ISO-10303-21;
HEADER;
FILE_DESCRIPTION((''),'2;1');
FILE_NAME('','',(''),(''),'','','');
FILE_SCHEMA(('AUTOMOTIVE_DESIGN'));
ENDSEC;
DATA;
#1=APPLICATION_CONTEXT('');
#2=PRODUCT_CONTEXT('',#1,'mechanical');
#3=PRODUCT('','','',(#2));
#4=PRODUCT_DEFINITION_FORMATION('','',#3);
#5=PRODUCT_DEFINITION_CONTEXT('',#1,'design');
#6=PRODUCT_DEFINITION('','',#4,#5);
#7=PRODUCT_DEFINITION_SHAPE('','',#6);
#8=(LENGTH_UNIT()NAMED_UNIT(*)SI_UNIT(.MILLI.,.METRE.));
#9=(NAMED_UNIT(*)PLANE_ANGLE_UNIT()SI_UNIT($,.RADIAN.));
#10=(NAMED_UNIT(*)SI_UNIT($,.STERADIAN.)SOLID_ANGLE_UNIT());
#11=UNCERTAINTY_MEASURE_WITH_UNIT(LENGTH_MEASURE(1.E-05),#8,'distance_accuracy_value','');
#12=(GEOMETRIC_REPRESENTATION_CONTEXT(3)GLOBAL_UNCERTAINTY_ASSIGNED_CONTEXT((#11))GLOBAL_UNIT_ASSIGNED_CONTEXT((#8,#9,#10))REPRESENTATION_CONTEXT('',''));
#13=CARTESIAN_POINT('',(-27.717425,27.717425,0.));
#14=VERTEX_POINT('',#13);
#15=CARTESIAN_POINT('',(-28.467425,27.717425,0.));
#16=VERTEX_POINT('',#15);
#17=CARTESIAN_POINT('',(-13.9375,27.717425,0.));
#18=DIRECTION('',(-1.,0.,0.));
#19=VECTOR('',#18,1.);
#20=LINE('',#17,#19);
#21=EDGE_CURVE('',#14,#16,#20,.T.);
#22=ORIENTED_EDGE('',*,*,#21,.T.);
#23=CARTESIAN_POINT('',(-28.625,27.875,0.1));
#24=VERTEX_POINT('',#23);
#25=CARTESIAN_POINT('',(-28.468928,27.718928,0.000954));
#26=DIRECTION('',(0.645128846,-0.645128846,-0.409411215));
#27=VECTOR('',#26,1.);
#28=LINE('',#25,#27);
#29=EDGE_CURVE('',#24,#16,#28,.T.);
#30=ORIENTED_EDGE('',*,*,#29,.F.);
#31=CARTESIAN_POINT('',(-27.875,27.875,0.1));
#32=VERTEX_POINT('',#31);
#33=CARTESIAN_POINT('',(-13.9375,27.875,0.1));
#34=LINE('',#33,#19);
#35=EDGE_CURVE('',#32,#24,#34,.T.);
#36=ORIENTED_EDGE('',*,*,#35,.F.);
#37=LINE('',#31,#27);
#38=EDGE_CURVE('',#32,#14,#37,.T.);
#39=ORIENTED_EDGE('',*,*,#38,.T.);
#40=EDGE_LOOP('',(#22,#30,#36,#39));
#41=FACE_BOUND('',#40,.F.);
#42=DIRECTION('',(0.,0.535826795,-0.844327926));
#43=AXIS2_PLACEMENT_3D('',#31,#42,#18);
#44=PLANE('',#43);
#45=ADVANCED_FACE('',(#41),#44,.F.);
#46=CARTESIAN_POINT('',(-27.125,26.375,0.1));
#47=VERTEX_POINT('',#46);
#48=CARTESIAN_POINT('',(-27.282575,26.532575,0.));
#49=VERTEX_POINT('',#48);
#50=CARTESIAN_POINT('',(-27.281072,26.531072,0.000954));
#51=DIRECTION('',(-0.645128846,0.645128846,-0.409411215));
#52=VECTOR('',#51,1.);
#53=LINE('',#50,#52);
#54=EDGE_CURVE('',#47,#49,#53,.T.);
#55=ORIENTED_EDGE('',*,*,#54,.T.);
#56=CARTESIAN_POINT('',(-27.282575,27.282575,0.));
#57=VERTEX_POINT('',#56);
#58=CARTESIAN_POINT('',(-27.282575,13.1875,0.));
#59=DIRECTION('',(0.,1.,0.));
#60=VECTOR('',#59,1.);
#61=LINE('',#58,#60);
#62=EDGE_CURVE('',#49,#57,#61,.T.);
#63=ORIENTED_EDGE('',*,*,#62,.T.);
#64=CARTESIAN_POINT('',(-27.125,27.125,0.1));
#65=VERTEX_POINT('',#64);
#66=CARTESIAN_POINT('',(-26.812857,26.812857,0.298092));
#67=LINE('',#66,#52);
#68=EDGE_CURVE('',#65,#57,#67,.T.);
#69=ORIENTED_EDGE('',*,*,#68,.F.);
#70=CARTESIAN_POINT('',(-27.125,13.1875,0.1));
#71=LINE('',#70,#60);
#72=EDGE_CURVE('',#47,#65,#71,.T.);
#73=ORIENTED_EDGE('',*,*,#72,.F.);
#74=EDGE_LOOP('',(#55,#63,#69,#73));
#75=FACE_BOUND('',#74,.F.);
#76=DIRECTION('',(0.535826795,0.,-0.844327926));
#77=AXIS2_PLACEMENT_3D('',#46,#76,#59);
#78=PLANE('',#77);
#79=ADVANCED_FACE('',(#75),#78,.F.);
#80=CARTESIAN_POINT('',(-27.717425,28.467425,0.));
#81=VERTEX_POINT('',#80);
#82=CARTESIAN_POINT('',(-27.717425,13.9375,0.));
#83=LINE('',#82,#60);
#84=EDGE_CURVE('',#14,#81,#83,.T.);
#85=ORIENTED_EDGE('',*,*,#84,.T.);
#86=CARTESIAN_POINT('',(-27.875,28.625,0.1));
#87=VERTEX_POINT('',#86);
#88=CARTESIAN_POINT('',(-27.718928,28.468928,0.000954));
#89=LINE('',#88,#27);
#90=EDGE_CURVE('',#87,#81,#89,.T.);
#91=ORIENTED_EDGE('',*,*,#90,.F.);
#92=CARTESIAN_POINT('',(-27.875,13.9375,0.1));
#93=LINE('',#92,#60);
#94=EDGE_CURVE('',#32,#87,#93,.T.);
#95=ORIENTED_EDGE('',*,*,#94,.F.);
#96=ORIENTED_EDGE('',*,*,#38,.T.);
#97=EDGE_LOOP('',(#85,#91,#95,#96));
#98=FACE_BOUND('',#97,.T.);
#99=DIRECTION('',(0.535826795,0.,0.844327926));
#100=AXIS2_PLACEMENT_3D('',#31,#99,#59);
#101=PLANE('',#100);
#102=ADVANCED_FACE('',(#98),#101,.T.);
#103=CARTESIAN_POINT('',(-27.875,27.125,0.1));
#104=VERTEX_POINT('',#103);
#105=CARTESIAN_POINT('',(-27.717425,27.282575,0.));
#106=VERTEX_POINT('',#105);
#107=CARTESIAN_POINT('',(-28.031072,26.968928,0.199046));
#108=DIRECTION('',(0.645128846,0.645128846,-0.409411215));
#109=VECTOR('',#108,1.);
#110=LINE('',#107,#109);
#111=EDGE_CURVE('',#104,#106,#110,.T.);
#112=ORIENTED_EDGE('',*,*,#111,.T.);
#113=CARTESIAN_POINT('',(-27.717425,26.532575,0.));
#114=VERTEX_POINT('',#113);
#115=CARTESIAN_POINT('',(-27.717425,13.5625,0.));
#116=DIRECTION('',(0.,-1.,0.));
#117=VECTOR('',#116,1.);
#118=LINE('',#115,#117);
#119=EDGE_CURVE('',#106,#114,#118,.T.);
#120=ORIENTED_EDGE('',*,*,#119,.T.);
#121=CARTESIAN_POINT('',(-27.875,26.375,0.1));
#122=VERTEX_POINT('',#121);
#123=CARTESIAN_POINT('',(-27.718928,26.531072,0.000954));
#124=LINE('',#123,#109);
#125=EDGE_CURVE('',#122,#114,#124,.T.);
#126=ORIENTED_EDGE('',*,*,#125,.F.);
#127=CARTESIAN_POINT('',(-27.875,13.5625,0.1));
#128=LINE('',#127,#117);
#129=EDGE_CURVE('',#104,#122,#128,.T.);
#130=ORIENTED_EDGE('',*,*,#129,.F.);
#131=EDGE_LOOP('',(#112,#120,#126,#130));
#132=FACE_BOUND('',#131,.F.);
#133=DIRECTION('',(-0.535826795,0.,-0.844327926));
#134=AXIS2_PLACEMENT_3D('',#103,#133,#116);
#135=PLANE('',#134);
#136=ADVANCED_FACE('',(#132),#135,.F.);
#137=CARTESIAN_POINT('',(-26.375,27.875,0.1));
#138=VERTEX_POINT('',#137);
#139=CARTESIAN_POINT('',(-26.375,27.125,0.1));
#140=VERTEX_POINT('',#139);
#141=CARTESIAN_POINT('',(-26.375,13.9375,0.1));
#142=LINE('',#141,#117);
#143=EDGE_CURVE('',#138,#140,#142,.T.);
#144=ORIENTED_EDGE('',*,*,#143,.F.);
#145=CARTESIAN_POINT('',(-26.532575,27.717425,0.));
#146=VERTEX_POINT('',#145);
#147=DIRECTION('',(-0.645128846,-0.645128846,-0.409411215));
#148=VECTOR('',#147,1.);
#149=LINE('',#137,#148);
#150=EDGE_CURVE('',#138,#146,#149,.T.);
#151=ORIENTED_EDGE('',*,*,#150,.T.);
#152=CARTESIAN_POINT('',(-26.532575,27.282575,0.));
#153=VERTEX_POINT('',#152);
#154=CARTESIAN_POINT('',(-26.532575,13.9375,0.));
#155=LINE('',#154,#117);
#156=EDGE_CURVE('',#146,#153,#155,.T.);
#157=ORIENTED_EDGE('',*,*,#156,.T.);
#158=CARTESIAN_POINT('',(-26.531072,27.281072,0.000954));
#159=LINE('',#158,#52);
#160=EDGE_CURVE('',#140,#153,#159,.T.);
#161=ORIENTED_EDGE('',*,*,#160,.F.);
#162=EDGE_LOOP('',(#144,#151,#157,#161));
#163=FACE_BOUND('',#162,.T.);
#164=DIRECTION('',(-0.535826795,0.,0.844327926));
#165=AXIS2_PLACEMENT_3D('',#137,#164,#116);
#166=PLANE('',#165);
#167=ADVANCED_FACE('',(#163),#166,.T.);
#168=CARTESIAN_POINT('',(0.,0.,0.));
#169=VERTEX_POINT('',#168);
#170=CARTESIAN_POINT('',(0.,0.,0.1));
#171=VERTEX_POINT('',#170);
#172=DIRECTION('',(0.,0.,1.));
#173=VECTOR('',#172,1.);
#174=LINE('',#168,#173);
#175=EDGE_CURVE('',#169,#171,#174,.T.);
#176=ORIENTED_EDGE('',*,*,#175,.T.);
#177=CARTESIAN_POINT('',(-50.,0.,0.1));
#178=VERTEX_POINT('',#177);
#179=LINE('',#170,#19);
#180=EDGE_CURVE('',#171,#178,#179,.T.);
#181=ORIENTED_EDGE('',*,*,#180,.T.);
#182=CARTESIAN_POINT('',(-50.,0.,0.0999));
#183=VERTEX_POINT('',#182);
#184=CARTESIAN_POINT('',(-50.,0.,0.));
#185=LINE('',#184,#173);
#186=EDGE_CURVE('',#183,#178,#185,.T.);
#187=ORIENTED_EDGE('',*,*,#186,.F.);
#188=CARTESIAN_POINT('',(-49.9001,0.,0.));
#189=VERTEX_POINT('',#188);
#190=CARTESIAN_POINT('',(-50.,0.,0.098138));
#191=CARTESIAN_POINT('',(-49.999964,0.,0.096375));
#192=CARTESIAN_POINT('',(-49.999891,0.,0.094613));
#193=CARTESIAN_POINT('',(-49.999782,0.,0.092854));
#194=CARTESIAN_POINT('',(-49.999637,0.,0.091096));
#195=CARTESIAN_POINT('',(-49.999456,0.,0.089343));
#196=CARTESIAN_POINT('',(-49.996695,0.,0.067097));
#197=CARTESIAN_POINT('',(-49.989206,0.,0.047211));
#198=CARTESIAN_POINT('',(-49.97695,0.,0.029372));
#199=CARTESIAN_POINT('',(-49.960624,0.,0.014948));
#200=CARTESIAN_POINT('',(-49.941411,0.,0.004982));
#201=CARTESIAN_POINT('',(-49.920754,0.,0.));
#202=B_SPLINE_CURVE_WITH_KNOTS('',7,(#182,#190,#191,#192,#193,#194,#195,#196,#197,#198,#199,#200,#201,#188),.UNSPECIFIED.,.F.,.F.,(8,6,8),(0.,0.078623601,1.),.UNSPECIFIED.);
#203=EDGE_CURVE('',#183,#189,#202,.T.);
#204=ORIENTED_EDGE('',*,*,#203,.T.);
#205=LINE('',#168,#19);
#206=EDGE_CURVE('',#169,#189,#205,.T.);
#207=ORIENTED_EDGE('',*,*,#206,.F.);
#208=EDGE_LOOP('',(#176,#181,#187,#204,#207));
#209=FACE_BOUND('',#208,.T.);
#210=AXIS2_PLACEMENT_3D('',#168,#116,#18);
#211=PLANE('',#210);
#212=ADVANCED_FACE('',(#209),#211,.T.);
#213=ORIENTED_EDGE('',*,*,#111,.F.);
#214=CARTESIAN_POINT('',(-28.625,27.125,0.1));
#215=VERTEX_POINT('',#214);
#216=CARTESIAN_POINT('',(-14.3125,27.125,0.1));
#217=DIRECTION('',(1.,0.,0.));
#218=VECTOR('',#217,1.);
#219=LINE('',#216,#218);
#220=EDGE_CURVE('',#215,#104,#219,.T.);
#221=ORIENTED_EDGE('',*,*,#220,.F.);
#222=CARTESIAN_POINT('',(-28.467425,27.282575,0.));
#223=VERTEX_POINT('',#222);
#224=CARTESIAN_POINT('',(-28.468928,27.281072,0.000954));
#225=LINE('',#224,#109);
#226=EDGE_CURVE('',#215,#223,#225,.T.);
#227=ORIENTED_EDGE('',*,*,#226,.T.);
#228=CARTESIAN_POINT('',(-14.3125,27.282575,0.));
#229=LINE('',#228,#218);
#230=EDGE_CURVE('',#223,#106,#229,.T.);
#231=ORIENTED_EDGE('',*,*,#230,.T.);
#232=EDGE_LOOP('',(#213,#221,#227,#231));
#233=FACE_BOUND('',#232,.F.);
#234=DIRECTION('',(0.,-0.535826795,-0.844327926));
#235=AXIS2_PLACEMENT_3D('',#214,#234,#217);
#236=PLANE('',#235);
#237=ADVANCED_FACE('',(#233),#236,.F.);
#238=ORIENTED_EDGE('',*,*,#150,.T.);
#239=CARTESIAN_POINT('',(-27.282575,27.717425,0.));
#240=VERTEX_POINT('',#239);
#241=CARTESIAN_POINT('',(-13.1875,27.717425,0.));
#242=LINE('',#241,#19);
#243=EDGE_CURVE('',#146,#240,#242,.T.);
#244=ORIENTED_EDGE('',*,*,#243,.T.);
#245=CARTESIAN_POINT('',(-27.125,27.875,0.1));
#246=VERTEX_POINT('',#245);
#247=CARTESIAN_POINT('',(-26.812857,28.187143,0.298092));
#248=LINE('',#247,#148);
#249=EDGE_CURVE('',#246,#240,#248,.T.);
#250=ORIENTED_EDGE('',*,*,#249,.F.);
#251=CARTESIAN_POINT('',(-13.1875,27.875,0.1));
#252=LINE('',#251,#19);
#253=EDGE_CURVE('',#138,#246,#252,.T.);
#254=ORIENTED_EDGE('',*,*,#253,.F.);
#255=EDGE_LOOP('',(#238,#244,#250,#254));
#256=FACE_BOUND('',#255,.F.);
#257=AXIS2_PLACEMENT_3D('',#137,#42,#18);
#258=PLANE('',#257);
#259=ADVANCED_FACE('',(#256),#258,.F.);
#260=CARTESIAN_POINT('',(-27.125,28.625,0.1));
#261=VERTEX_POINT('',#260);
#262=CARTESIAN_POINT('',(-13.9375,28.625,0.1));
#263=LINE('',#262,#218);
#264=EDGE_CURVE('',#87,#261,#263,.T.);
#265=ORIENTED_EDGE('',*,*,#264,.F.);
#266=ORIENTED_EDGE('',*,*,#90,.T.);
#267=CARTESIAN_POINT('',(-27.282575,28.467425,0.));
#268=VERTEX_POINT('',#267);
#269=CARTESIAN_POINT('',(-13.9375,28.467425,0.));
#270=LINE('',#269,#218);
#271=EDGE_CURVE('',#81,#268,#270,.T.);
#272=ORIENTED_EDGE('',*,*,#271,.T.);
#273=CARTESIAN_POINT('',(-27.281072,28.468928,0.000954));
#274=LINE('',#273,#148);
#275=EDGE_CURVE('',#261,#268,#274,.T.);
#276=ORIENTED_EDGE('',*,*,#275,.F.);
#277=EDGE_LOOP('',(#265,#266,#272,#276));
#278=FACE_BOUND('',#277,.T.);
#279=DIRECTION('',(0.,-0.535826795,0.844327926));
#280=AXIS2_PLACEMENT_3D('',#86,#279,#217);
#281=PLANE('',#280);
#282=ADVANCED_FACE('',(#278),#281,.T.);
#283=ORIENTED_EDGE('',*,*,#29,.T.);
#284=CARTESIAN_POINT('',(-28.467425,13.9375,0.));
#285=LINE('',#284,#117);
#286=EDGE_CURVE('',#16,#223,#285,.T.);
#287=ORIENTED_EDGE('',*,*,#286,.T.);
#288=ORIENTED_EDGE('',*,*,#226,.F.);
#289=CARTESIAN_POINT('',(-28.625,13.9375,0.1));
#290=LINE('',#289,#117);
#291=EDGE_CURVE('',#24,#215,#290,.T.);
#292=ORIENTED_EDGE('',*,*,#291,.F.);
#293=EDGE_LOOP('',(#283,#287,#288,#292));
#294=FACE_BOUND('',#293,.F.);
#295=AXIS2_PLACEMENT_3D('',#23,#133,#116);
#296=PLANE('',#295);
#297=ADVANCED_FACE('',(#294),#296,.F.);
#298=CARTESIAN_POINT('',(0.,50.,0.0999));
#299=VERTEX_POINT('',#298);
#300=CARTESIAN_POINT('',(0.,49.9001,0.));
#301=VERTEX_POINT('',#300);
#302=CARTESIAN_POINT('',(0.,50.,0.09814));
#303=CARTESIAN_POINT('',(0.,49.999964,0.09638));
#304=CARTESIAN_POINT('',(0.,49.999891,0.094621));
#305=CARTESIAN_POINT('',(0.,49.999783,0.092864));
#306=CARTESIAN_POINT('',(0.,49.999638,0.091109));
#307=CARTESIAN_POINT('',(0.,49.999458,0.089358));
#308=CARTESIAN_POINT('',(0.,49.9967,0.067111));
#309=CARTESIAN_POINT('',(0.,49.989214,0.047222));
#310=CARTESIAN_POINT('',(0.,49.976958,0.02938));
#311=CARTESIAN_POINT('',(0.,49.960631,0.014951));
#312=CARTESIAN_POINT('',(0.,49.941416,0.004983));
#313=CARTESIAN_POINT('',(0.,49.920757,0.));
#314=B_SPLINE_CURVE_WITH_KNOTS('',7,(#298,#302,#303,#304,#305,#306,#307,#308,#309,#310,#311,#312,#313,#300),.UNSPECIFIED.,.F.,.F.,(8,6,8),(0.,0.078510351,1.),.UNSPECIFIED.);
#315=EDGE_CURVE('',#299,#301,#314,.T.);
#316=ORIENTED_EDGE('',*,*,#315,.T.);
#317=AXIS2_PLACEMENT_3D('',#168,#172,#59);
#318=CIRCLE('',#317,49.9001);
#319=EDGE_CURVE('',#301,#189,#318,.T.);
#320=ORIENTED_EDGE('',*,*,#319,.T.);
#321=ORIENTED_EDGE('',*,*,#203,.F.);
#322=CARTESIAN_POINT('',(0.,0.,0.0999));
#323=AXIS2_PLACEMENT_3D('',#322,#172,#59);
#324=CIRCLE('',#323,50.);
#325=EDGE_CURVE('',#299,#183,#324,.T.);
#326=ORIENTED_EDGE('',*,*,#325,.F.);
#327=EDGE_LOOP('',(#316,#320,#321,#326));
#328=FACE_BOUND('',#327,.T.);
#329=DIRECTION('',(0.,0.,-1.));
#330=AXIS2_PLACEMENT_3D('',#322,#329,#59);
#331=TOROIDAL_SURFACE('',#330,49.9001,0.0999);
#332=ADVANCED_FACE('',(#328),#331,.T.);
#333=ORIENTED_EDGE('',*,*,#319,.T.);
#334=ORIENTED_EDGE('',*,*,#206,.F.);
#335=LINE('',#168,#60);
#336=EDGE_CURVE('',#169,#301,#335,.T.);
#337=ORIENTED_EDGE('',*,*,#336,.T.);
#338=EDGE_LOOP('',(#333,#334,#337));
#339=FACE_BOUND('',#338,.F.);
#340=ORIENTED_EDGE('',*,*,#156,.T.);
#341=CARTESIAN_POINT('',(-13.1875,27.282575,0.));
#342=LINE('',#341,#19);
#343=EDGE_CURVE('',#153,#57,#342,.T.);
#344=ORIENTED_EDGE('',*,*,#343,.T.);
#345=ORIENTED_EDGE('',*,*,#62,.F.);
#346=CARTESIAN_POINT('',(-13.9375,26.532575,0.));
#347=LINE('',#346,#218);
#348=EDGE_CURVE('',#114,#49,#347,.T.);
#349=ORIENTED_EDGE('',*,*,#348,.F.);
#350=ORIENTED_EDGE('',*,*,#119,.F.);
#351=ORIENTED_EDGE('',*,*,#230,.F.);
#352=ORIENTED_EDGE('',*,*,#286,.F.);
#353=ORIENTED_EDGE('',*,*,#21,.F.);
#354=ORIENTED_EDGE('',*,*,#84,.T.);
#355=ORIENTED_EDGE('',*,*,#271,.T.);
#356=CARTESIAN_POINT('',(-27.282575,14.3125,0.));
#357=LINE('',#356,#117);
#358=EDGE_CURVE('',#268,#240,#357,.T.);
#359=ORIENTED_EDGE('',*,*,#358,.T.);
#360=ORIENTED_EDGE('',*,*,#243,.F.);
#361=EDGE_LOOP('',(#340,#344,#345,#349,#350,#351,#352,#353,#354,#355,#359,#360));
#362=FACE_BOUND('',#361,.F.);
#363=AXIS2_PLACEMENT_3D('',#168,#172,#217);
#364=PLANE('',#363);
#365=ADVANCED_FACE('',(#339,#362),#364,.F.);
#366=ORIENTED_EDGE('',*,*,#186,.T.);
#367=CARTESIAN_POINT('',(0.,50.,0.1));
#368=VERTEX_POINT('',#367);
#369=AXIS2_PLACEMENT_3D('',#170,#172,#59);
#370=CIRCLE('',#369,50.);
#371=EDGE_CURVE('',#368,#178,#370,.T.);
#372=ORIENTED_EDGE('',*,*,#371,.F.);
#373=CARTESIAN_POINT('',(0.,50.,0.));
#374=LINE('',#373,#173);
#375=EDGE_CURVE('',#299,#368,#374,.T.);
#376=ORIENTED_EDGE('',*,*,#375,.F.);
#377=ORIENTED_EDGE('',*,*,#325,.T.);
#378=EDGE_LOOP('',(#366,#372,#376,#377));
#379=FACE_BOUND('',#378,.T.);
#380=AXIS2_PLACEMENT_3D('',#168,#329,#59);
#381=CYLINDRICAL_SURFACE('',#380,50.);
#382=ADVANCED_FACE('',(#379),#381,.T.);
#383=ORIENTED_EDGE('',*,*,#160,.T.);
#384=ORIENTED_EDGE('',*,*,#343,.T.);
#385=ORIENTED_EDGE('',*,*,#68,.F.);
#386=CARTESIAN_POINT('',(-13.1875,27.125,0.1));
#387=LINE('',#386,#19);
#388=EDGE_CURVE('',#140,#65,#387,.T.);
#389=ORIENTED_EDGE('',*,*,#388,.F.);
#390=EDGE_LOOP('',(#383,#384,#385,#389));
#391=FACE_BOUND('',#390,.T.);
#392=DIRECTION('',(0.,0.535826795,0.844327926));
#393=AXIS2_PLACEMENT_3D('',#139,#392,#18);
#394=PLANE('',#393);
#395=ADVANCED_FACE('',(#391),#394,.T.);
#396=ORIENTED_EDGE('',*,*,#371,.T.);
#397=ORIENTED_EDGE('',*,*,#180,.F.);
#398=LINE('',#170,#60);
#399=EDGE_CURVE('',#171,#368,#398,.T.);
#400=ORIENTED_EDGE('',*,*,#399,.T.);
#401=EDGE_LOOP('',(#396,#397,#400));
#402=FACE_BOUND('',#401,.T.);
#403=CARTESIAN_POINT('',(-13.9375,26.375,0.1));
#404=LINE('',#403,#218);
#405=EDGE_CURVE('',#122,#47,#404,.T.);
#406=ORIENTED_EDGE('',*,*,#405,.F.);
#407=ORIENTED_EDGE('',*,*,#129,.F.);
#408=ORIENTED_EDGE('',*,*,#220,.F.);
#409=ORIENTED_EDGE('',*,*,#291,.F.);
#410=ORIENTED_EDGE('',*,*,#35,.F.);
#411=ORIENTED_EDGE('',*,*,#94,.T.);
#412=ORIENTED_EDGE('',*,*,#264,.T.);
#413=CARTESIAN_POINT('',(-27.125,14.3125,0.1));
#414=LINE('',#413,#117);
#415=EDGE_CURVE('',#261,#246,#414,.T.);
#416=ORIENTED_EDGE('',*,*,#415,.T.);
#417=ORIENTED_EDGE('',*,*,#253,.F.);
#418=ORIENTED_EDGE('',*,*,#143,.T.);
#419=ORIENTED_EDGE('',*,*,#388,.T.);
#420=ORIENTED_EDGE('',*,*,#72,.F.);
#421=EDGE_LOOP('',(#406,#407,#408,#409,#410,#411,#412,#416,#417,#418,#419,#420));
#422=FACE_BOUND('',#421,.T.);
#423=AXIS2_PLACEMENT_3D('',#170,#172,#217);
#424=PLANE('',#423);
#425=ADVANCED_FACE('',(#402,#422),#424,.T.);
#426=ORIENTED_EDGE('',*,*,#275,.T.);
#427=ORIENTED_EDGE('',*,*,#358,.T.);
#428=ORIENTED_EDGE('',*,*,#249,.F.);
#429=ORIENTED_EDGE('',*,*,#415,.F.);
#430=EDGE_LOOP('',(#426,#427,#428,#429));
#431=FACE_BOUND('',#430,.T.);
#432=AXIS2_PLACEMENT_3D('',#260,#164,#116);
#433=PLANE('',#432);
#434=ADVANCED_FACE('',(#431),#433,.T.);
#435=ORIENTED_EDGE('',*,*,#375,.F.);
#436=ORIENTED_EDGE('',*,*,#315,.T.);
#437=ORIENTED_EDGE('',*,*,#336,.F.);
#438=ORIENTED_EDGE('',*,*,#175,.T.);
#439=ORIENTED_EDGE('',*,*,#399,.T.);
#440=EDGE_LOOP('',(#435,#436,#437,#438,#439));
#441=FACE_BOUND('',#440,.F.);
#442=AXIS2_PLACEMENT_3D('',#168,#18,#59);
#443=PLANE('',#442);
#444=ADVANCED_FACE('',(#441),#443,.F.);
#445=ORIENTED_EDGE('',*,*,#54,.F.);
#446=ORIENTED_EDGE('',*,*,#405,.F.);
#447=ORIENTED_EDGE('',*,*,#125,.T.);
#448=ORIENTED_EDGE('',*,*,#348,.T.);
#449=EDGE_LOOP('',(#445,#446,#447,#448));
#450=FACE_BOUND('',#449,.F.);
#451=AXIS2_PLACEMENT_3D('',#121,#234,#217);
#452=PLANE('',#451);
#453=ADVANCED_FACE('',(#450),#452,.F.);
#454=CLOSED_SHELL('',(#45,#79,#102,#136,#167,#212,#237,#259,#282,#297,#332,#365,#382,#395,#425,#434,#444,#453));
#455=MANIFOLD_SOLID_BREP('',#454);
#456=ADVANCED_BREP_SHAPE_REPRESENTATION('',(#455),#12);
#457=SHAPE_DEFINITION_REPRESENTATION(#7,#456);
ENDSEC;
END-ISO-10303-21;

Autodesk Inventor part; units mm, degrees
ref_plane "YZ Plane" through (0, 0, 0) normal (1, 0, 0) x (0, 1, 0)
ref_plane "XZ Plane" through (0, 0, 0) normal (0, 1, 0) x (-1, 0, 0)
ref_plane "XY Plane" through (0, 0, 0) normal (0, 0, 1) x (1, 0, 0)
sketch "Sketch1" plane through (0, 0, 0) normal (0, 0, 1) x (1, 0, 0)
  line L0 (0, 0) -> (-50, 0)
  line L1 (0, 0) -> (0, 50)
  arc A0 (0, 50) -> (-50, 0) centre (0, 0) ccw
  dimension "d0" = 50
extrude "Wafer" add sketch "Sketch1" along normal blind 0.1
fillet "OuterEdge" radius 0.1 1 edges at (-35.3553, 35.3553, 0)
sketch "DeepEtchSketch" plane through (0, 0, 0.1) normal (0, 0, 1) x (1, 0, 0)
  line L0 (0, 0) -> (-50, 0) projected
  line L1 (0, 50) -> (0, 0) projected
  line L2 (-25, 25) -> (-15, 25) construction
  line L3 (-15, 25) -> (-15, 15) construction
  line L4 (-15, 15) -> (-25, 15) construction
  line L5 (-25, 15) -> (-25, 25) construction
  line L6 (-25, 20) -> (-15, 20) construction
  line L7 (-20, 25) -> (-20, 15) construction
  line L8 (-27.875, 27.875) -> (-27.125, 27.875) construction
  line L9 (-27.125, 27.875) -> (-27.125, 27.125) construction
  line L10 (-27.125, 27.125) -> (-27.875, 27.125) construction
  line L11 (-27.875, 27.125) -> (-27.875, 27.875) construction
  line L12 (-27.875, 27.875) -> (-28.625, 27.875)
  line L13 (-28.625, 27.875) -> (-28.625, 27.125)
  line L14 (-28.625, 27.125) -> (-27.875, 27.125)
  line L15 (-27.875, 27.125) -> (-27.875, 26.375)
  line L16 (-27.875, 26.375) -> (-27.125, 26.375)
  line L17 (-27.125, 26.375) -> (-27.125, 27.125)
  line L18 (-27.875, 27.875) -> (-27.875, 28.625)
  line L19 (-27.875, 28.625) -> (-27.125, 28.625)
  line L20 (-27.125, 28.625) -> (-27.125, 27.875)
  line L21 (-26.375, 27.875) -> (-27.125, 27.875)
  line L22 (-26.375, 27.875) -> (-26.375, 27.125)
  line L23 (-26.375, 27.125) -> (-27.125, 27.125)
  line L24 (-27.875, 27.5) -> (-27.125, 27.5) construction
  line L25 (-27.5, 27.875) -> (-27.5, 27.125) construction
  dimension "d4" = 20
  dimension "d5" = 20
  dimension "d6" = 10
  dimension "d7" = 0.75
  dimension "d12" = 2.5
  dimension "d13" = 2.5
extrude "ThroughWaferEtch" cut sketch "DeepEtchSketch" against normal blind 0.1 draft -57.6
properties part number "top-wafer"
